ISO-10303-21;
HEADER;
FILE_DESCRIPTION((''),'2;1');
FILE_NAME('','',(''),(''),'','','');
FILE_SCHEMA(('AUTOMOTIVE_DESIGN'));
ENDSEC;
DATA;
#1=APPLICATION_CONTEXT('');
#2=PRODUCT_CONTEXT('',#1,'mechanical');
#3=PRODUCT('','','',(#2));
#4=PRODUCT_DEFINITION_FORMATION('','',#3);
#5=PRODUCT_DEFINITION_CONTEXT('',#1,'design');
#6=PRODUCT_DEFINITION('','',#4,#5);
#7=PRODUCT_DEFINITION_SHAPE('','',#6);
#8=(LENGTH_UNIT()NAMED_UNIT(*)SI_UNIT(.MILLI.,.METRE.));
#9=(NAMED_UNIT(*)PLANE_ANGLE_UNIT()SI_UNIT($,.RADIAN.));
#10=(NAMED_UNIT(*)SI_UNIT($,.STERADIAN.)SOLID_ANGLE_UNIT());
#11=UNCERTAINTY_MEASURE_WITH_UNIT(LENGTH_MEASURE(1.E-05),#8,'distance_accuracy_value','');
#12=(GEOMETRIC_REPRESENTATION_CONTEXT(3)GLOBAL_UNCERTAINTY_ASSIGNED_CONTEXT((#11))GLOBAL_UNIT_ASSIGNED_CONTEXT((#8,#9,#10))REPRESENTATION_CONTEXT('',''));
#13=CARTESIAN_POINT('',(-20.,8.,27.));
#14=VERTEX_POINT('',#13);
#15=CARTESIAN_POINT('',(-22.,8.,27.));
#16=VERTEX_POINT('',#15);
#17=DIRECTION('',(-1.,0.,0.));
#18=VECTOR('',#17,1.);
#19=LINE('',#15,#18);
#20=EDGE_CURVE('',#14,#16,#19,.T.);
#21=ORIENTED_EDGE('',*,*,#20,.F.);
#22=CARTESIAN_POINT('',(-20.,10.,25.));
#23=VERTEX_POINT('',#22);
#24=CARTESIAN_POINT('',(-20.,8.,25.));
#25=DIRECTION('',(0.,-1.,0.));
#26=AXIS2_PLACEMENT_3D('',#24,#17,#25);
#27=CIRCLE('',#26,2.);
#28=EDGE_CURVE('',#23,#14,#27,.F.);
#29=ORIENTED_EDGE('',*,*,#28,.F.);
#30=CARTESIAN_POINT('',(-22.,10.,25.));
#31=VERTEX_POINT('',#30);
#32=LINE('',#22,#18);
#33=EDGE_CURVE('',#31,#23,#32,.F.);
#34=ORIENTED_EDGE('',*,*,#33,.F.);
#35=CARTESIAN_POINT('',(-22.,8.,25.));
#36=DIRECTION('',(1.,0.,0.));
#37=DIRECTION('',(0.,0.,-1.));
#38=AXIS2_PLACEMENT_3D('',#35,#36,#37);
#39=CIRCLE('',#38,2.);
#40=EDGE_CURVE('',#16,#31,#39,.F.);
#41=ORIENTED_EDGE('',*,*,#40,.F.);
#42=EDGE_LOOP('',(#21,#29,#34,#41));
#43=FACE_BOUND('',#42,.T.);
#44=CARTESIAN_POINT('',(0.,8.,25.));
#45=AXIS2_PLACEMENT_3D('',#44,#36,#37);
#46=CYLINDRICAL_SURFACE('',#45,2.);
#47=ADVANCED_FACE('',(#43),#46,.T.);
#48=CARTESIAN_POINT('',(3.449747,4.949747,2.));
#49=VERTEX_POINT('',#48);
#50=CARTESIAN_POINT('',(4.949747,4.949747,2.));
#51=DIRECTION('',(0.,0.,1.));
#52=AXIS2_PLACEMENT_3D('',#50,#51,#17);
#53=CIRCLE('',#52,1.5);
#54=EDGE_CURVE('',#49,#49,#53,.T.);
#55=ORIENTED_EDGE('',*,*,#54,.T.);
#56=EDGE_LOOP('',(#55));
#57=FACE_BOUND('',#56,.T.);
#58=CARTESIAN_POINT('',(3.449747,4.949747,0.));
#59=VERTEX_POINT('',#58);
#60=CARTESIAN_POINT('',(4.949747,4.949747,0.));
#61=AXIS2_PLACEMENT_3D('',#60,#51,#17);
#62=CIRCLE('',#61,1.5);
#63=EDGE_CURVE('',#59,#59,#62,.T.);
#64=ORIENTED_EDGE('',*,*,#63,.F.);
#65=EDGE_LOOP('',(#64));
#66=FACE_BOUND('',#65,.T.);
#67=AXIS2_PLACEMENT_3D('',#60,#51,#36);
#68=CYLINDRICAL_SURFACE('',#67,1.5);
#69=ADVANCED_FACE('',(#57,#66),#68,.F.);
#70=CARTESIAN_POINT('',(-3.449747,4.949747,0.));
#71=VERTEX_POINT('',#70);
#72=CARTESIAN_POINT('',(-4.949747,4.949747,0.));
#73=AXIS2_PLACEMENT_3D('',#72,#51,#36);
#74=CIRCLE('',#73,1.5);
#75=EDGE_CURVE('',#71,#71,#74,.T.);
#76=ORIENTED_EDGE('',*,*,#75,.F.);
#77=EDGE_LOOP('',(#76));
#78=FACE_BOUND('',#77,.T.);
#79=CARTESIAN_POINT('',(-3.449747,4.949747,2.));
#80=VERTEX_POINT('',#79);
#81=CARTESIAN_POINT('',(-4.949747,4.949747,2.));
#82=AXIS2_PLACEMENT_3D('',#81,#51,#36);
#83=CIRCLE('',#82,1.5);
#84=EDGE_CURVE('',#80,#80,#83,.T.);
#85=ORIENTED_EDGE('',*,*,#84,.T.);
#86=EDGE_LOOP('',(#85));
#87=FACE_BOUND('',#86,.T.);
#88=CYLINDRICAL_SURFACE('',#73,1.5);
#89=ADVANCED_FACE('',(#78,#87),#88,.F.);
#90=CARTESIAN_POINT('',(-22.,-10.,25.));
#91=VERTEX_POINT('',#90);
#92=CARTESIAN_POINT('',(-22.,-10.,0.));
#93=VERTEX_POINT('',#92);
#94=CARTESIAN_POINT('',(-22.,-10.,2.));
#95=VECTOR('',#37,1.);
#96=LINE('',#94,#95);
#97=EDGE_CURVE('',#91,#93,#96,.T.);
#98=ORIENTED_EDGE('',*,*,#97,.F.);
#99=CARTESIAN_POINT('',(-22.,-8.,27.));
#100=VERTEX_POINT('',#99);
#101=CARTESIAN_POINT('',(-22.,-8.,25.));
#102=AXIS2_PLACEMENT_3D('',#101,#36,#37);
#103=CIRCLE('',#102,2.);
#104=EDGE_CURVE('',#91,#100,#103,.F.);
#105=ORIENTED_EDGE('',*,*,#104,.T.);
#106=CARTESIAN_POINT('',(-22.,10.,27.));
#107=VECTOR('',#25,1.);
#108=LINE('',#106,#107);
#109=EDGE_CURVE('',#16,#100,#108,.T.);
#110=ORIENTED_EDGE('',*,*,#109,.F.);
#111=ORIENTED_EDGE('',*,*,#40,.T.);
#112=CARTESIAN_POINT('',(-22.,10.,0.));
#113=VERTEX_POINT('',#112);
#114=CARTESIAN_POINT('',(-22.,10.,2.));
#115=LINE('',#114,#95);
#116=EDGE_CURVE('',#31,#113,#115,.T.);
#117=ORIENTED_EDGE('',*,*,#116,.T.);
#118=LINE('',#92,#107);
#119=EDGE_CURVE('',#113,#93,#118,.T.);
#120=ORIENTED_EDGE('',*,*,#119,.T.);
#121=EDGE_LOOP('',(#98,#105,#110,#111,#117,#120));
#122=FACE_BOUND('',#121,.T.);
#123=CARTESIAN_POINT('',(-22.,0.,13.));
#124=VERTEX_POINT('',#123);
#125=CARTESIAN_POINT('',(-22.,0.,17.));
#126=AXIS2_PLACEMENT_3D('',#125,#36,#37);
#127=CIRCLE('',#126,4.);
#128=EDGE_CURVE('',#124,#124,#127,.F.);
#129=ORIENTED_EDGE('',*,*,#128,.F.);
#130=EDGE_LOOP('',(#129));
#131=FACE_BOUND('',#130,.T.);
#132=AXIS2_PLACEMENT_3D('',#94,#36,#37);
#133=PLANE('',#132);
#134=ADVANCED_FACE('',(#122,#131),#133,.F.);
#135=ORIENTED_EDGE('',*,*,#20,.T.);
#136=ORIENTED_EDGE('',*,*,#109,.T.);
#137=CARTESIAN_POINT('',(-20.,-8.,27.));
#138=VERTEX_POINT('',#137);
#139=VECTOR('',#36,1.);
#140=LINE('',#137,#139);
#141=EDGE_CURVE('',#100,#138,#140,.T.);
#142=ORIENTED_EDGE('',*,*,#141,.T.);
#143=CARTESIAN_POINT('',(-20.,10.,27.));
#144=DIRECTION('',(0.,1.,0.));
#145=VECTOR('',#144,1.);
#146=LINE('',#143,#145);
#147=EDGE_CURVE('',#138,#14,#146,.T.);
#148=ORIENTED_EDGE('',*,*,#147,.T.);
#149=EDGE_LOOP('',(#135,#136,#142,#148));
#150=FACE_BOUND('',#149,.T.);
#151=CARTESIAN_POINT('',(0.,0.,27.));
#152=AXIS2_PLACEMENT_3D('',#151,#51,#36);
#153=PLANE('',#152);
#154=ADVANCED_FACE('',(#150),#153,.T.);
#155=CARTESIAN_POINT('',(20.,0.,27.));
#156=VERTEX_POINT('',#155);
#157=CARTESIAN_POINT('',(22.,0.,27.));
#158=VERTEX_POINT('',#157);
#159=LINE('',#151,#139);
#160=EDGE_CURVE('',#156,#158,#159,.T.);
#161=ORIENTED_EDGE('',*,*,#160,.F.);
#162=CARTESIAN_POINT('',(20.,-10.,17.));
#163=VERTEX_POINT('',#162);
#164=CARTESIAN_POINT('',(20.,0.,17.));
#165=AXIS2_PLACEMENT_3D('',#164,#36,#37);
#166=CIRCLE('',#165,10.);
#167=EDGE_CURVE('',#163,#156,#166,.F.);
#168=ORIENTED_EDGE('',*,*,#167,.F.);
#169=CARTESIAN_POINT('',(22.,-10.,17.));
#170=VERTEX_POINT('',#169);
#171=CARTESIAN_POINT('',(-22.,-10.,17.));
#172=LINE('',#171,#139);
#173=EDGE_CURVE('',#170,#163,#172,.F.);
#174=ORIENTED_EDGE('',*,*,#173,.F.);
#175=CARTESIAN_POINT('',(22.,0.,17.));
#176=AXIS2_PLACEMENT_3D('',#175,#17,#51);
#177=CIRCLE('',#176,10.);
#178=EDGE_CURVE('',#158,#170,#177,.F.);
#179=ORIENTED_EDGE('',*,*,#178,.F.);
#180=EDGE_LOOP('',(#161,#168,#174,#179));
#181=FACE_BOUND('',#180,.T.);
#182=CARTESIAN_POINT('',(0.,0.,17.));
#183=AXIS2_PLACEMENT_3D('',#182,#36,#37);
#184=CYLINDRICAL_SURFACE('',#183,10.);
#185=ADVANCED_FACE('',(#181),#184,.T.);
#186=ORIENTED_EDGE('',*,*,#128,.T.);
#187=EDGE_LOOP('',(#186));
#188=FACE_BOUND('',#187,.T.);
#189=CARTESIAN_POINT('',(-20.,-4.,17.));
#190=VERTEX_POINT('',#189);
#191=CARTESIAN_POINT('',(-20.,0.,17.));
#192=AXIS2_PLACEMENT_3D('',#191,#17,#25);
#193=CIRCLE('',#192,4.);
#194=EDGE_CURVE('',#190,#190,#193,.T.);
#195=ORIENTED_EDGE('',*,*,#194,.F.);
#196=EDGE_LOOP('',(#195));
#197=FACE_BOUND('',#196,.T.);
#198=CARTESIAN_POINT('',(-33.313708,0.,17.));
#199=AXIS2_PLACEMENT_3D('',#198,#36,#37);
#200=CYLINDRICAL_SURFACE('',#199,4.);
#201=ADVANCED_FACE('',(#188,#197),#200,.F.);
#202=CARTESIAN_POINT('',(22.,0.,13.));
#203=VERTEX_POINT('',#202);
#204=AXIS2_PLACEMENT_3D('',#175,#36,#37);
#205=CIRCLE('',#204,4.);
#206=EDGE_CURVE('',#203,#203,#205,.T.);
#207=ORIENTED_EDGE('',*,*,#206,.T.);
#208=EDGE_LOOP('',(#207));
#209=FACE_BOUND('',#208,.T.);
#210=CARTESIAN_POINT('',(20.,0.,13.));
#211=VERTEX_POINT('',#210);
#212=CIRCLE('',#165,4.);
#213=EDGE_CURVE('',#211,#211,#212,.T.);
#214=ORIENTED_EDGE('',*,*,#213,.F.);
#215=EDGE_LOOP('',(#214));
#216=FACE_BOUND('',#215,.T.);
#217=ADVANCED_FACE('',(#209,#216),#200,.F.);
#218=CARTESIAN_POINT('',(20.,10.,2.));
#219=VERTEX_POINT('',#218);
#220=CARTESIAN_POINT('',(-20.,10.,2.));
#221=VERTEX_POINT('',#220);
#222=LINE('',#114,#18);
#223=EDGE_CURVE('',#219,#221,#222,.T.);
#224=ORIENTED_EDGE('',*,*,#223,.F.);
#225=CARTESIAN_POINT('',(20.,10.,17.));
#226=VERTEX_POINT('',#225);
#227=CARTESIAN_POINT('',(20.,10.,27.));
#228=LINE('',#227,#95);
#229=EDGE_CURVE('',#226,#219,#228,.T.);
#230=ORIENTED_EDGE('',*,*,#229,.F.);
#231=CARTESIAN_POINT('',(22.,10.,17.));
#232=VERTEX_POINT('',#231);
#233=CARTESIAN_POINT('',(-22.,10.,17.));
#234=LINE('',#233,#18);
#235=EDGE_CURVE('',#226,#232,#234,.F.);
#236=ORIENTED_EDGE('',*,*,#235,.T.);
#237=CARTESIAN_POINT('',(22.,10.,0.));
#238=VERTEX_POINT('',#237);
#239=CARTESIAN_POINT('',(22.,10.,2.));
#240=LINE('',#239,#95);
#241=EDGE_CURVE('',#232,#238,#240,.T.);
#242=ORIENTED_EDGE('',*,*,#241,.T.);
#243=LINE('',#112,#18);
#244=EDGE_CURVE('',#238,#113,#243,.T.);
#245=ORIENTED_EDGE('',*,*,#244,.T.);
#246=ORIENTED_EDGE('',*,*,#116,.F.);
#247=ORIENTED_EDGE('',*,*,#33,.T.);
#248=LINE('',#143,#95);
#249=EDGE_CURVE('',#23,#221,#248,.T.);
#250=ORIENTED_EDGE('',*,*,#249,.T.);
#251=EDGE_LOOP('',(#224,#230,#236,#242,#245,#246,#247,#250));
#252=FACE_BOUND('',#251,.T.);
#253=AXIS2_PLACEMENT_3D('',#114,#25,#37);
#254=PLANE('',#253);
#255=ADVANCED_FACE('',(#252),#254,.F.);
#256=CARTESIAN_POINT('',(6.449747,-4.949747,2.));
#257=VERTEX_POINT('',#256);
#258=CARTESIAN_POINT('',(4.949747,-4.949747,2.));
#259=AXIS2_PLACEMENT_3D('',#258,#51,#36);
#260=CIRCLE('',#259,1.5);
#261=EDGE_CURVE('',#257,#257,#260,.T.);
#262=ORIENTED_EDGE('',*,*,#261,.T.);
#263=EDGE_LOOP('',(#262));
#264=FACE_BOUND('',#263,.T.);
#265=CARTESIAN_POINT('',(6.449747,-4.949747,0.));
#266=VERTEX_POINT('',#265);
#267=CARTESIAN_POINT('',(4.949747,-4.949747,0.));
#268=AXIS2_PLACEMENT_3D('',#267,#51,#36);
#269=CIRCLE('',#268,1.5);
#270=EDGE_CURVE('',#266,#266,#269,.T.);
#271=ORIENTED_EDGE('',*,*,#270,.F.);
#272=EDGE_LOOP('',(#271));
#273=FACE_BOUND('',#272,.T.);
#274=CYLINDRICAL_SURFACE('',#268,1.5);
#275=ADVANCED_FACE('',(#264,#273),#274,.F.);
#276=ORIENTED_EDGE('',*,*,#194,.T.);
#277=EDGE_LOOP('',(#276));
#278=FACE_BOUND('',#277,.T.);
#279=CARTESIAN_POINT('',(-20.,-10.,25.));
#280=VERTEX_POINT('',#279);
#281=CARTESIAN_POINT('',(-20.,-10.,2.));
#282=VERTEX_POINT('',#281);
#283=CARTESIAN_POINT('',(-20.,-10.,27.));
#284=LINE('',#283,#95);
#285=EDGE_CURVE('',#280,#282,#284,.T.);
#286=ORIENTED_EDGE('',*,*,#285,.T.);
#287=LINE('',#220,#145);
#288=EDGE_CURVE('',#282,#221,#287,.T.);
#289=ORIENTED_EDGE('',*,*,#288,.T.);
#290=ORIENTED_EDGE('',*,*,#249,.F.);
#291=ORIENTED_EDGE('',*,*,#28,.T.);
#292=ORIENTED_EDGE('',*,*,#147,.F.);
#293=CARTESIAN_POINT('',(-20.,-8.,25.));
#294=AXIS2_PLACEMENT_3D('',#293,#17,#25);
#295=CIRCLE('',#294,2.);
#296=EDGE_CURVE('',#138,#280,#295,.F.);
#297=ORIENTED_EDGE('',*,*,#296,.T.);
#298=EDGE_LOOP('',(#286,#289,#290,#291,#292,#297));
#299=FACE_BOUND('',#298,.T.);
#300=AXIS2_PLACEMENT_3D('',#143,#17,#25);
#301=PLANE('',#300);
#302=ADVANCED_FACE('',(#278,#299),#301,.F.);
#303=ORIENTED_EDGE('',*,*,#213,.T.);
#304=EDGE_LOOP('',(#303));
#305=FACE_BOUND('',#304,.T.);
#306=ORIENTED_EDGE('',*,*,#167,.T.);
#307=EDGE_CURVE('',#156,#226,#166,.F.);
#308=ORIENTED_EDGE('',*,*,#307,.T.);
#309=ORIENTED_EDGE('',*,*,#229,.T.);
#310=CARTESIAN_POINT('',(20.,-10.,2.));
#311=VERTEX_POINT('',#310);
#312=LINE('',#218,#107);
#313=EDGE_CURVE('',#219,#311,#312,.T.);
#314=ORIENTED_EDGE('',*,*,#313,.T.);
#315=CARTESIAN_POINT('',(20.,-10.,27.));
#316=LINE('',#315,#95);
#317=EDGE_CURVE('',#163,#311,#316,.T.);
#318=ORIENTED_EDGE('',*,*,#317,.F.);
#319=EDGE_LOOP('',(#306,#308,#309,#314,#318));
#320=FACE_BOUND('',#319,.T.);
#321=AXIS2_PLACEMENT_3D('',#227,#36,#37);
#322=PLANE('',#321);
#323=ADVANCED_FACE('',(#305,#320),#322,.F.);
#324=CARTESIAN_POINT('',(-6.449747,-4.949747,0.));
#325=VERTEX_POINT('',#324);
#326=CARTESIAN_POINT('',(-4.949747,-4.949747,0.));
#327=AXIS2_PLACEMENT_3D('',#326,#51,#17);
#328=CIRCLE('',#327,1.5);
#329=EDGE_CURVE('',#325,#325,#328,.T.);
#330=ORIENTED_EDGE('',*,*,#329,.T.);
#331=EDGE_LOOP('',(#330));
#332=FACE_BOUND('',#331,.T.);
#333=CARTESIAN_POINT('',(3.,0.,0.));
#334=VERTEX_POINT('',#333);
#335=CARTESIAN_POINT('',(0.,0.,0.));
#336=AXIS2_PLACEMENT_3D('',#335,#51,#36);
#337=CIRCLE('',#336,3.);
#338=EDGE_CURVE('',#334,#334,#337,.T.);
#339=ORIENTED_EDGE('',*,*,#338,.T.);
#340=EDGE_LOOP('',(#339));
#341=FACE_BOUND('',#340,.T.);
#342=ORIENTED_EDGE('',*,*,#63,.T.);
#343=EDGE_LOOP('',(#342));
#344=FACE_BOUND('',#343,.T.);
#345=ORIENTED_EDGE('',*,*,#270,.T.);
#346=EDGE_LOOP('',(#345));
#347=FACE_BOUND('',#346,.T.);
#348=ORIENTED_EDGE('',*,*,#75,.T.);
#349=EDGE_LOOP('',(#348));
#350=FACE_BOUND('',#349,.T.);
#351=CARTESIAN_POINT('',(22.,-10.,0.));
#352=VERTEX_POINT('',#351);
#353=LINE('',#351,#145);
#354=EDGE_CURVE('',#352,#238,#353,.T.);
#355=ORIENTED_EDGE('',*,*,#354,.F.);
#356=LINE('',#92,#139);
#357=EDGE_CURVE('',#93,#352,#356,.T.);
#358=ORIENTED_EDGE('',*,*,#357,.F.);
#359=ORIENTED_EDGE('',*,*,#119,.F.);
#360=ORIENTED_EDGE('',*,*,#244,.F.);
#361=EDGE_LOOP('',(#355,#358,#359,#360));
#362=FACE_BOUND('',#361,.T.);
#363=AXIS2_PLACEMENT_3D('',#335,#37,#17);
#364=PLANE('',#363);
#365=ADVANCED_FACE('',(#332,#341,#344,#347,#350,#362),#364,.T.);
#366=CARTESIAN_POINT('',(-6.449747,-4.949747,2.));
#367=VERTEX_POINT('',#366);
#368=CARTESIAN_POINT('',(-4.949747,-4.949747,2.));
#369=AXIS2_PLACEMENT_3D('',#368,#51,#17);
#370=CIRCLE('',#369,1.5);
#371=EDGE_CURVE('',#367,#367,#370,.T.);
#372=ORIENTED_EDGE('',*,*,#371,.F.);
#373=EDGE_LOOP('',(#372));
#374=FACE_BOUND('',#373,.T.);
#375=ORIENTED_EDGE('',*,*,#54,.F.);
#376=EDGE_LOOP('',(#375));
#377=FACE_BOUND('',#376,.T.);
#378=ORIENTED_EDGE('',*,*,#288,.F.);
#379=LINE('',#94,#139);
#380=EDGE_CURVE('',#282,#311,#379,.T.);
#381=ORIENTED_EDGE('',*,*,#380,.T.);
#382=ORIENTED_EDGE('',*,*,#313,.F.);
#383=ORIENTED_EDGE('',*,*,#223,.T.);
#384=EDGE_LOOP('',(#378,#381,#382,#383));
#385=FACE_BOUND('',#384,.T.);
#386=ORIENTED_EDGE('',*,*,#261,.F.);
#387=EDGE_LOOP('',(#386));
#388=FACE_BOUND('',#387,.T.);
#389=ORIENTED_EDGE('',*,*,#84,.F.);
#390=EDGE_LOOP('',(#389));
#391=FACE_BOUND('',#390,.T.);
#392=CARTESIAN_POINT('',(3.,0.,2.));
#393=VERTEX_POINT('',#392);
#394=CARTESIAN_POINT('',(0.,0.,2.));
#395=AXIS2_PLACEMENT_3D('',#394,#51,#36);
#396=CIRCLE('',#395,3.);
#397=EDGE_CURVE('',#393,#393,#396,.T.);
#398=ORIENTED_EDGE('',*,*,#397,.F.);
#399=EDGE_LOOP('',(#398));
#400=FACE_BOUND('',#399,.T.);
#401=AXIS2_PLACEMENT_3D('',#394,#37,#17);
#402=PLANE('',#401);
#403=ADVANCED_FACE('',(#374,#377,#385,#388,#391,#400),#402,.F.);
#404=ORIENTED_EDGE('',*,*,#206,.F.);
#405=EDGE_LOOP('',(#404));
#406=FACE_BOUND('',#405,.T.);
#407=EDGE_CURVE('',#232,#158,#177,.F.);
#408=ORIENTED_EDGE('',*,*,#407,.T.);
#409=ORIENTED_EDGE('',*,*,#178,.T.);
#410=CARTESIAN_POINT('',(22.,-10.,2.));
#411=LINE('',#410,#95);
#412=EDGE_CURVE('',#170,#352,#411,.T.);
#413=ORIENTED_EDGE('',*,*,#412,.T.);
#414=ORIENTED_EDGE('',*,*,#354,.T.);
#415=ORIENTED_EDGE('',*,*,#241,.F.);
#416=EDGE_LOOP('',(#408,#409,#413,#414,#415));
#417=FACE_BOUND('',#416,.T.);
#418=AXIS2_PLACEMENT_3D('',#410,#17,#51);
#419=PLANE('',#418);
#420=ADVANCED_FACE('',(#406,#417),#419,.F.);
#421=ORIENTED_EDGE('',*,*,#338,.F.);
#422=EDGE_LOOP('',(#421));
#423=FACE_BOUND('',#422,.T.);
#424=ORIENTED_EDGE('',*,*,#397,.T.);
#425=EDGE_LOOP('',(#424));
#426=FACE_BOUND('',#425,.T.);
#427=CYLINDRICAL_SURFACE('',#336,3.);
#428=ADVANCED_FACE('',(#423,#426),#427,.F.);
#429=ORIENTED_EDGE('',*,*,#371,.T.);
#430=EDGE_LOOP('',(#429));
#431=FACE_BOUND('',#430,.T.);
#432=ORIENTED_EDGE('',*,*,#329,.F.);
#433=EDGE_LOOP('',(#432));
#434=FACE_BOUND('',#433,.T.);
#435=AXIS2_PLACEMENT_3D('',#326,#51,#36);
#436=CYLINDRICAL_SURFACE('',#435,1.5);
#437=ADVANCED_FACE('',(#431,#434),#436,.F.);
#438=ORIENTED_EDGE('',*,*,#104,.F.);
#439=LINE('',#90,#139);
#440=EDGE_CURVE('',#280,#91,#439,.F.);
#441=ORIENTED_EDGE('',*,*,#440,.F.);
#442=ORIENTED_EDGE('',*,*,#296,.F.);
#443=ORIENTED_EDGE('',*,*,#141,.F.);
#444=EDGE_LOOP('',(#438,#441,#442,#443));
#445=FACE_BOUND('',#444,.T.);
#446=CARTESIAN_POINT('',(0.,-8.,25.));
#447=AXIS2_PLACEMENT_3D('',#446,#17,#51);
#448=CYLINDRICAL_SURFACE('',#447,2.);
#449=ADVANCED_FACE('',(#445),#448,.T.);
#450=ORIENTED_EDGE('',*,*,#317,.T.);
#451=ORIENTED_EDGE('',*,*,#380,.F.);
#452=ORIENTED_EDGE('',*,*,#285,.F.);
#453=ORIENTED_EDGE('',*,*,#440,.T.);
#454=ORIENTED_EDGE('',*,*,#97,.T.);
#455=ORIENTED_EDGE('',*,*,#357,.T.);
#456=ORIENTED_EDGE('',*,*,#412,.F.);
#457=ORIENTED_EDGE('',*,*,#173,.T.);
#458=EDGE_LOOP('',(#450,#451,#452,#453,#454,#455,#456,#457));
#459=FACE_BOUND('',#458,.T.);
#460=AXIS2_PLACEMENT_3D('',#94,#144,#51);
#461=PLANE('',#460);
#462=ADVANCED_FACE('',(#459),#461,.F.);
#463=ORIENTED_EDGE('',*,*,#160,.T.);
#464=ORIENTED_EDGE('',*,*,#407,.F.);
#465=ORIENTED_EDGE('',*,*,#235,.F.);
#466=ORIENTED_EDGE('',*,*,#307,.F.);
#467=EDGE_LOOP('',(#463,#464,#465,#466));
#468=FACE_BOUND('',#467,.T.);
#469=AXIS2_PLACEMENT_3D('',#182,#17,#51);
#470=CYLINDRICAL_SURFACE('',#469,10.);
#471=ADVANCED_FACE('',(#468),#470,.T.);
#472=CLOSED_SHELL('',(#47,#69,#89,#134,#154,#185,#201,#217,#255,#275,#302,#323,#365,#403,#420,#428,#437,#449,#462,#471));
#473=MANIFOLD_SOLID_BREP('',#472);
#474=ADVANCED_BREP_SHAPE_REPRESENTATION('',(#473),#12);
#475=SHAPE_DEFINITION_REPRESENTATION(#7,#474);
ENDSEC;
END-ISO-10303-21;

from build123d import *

# Parameters (mm, degrees)
CROQUIS1_W              = 44
CROQUIS1_H              = 20
SALIENTE_EXTRUIR1_DEPTH = 2
CROQUIS2_R              = 3
CROQUIS2_R_2            = 1.5
CORTAR_EXTRUIR1_DEPTH   = 2
CROQUIS3_W              = 2
CROQUIS3_H              = 20
SALIENTE_EXTRUIR2_DEPTH = 25
REDONDEO1_R             = 10
REDONDEO2_R             = 2
CORTAR_EXTRUIR2_REACH   = 54.583
CROQUIS4_R              = 4


with BuildPart() as part:
    # Croquis1 → Saliente-Extruir1 (new body)
    with BuildSketch(Plane.XY):
        Rectangle(CROQUIS1_W, CROQUIS1_H)
    extrude(amount=SALIENTE_EXTRUIR1_DEPTH)

    # Croquis2 → Cortar-Extruir1 (cut)
    with BuildSketch(Plane.XY.offset(2)):
        Circle(CROQUIS2_R)
        with Locations((-4.949747468, 4.949747468)):
            Circle(CROQUIS2_R_2)
        with Locations(Location((4.949747468, 4.949747468, 0), (0, 0, 180))):
            Circle(CROQUIS2_R_2)
        with Locations((4.949747468, -4.949747468)):
            Circle(CROQUIS2_R_2)
        with Locations(Location((-4.949747468, -4.949747468, 0), (0, 0, 180))):
            Circle(CROQUIS2_R_2)
    extrude(amount=-CORTAR_EXTRUIR1_DEPTH, mode=Mode.SUBTRACT)

    # Croquis3 → Saliente-Extruir2 (add)
    with BuildSketch(Plane.XY.offset(2)):
        with Locations((-21, 0)):
            Rectangle(CROQUIS3_W, CROQUIS3_H)
        with Locations((21, 0)):
            Rectangle(CROQUIS3_W, CROQUIS3_H)
    extrude(amount=SALIENTE_EXTRUIR2_DEPTH)

    # Redondeo1
    redondeo1_edges = [part.edges().sort_by_distance(p)[0] for p in [
        (21, 10, 27),
        (21, -10, 27),
    ]]
    fillet(redondeo1_edges, radius=REDONDEO1_R - 0.0001)  # a hair under: the kernel refuses the full size

    # Redondeo2
    redondeo2_edges = [part.edges().sort_by_distance(p)[0] for p in [
        (-21, -10, 27),
        (-21, 10, 27),
    ]]
    fillet(redondeo2_edges, radius=REDONDEO2_R)

    # Cortar-Extruir2: up to this face of the body (flat: up to its plane)
    cortar_extruir2_end = Plane(part.part.faces().sort_by_distance((-22, 0, 13.458367573))[0])
    # Croquis4 → Cortar-Extruir2 (cut, up to the picked face)
    with BuildSketch(Plane(origin=(22, 0, 0), x_dir=(0, 0, -1), z_dir=(1, 0, 0)), mode=Mode.PRIVATE) as cortar_extruir2_sk1:
        with Locations((-17, 0)):
            Circle(CROQUIS4_R)
    cortar_extruir2_tool1 = split(extrude(cortar_extruir2_sk1.sketch, amount=-CORTAR_EXTRUIR2_REACH, mode=Mode.PRIVATE), bisect_by=cortar_extruir2_end, keep=Keep.BOTH, mode=Mode.PRIVATE)
    add(cortar_extruir2_tool1.solids().sort_by(Axis((22, 0, 17), (-1, 0, 0)))[0], mode=Mode.SUBTRACT)


solid = part.part
